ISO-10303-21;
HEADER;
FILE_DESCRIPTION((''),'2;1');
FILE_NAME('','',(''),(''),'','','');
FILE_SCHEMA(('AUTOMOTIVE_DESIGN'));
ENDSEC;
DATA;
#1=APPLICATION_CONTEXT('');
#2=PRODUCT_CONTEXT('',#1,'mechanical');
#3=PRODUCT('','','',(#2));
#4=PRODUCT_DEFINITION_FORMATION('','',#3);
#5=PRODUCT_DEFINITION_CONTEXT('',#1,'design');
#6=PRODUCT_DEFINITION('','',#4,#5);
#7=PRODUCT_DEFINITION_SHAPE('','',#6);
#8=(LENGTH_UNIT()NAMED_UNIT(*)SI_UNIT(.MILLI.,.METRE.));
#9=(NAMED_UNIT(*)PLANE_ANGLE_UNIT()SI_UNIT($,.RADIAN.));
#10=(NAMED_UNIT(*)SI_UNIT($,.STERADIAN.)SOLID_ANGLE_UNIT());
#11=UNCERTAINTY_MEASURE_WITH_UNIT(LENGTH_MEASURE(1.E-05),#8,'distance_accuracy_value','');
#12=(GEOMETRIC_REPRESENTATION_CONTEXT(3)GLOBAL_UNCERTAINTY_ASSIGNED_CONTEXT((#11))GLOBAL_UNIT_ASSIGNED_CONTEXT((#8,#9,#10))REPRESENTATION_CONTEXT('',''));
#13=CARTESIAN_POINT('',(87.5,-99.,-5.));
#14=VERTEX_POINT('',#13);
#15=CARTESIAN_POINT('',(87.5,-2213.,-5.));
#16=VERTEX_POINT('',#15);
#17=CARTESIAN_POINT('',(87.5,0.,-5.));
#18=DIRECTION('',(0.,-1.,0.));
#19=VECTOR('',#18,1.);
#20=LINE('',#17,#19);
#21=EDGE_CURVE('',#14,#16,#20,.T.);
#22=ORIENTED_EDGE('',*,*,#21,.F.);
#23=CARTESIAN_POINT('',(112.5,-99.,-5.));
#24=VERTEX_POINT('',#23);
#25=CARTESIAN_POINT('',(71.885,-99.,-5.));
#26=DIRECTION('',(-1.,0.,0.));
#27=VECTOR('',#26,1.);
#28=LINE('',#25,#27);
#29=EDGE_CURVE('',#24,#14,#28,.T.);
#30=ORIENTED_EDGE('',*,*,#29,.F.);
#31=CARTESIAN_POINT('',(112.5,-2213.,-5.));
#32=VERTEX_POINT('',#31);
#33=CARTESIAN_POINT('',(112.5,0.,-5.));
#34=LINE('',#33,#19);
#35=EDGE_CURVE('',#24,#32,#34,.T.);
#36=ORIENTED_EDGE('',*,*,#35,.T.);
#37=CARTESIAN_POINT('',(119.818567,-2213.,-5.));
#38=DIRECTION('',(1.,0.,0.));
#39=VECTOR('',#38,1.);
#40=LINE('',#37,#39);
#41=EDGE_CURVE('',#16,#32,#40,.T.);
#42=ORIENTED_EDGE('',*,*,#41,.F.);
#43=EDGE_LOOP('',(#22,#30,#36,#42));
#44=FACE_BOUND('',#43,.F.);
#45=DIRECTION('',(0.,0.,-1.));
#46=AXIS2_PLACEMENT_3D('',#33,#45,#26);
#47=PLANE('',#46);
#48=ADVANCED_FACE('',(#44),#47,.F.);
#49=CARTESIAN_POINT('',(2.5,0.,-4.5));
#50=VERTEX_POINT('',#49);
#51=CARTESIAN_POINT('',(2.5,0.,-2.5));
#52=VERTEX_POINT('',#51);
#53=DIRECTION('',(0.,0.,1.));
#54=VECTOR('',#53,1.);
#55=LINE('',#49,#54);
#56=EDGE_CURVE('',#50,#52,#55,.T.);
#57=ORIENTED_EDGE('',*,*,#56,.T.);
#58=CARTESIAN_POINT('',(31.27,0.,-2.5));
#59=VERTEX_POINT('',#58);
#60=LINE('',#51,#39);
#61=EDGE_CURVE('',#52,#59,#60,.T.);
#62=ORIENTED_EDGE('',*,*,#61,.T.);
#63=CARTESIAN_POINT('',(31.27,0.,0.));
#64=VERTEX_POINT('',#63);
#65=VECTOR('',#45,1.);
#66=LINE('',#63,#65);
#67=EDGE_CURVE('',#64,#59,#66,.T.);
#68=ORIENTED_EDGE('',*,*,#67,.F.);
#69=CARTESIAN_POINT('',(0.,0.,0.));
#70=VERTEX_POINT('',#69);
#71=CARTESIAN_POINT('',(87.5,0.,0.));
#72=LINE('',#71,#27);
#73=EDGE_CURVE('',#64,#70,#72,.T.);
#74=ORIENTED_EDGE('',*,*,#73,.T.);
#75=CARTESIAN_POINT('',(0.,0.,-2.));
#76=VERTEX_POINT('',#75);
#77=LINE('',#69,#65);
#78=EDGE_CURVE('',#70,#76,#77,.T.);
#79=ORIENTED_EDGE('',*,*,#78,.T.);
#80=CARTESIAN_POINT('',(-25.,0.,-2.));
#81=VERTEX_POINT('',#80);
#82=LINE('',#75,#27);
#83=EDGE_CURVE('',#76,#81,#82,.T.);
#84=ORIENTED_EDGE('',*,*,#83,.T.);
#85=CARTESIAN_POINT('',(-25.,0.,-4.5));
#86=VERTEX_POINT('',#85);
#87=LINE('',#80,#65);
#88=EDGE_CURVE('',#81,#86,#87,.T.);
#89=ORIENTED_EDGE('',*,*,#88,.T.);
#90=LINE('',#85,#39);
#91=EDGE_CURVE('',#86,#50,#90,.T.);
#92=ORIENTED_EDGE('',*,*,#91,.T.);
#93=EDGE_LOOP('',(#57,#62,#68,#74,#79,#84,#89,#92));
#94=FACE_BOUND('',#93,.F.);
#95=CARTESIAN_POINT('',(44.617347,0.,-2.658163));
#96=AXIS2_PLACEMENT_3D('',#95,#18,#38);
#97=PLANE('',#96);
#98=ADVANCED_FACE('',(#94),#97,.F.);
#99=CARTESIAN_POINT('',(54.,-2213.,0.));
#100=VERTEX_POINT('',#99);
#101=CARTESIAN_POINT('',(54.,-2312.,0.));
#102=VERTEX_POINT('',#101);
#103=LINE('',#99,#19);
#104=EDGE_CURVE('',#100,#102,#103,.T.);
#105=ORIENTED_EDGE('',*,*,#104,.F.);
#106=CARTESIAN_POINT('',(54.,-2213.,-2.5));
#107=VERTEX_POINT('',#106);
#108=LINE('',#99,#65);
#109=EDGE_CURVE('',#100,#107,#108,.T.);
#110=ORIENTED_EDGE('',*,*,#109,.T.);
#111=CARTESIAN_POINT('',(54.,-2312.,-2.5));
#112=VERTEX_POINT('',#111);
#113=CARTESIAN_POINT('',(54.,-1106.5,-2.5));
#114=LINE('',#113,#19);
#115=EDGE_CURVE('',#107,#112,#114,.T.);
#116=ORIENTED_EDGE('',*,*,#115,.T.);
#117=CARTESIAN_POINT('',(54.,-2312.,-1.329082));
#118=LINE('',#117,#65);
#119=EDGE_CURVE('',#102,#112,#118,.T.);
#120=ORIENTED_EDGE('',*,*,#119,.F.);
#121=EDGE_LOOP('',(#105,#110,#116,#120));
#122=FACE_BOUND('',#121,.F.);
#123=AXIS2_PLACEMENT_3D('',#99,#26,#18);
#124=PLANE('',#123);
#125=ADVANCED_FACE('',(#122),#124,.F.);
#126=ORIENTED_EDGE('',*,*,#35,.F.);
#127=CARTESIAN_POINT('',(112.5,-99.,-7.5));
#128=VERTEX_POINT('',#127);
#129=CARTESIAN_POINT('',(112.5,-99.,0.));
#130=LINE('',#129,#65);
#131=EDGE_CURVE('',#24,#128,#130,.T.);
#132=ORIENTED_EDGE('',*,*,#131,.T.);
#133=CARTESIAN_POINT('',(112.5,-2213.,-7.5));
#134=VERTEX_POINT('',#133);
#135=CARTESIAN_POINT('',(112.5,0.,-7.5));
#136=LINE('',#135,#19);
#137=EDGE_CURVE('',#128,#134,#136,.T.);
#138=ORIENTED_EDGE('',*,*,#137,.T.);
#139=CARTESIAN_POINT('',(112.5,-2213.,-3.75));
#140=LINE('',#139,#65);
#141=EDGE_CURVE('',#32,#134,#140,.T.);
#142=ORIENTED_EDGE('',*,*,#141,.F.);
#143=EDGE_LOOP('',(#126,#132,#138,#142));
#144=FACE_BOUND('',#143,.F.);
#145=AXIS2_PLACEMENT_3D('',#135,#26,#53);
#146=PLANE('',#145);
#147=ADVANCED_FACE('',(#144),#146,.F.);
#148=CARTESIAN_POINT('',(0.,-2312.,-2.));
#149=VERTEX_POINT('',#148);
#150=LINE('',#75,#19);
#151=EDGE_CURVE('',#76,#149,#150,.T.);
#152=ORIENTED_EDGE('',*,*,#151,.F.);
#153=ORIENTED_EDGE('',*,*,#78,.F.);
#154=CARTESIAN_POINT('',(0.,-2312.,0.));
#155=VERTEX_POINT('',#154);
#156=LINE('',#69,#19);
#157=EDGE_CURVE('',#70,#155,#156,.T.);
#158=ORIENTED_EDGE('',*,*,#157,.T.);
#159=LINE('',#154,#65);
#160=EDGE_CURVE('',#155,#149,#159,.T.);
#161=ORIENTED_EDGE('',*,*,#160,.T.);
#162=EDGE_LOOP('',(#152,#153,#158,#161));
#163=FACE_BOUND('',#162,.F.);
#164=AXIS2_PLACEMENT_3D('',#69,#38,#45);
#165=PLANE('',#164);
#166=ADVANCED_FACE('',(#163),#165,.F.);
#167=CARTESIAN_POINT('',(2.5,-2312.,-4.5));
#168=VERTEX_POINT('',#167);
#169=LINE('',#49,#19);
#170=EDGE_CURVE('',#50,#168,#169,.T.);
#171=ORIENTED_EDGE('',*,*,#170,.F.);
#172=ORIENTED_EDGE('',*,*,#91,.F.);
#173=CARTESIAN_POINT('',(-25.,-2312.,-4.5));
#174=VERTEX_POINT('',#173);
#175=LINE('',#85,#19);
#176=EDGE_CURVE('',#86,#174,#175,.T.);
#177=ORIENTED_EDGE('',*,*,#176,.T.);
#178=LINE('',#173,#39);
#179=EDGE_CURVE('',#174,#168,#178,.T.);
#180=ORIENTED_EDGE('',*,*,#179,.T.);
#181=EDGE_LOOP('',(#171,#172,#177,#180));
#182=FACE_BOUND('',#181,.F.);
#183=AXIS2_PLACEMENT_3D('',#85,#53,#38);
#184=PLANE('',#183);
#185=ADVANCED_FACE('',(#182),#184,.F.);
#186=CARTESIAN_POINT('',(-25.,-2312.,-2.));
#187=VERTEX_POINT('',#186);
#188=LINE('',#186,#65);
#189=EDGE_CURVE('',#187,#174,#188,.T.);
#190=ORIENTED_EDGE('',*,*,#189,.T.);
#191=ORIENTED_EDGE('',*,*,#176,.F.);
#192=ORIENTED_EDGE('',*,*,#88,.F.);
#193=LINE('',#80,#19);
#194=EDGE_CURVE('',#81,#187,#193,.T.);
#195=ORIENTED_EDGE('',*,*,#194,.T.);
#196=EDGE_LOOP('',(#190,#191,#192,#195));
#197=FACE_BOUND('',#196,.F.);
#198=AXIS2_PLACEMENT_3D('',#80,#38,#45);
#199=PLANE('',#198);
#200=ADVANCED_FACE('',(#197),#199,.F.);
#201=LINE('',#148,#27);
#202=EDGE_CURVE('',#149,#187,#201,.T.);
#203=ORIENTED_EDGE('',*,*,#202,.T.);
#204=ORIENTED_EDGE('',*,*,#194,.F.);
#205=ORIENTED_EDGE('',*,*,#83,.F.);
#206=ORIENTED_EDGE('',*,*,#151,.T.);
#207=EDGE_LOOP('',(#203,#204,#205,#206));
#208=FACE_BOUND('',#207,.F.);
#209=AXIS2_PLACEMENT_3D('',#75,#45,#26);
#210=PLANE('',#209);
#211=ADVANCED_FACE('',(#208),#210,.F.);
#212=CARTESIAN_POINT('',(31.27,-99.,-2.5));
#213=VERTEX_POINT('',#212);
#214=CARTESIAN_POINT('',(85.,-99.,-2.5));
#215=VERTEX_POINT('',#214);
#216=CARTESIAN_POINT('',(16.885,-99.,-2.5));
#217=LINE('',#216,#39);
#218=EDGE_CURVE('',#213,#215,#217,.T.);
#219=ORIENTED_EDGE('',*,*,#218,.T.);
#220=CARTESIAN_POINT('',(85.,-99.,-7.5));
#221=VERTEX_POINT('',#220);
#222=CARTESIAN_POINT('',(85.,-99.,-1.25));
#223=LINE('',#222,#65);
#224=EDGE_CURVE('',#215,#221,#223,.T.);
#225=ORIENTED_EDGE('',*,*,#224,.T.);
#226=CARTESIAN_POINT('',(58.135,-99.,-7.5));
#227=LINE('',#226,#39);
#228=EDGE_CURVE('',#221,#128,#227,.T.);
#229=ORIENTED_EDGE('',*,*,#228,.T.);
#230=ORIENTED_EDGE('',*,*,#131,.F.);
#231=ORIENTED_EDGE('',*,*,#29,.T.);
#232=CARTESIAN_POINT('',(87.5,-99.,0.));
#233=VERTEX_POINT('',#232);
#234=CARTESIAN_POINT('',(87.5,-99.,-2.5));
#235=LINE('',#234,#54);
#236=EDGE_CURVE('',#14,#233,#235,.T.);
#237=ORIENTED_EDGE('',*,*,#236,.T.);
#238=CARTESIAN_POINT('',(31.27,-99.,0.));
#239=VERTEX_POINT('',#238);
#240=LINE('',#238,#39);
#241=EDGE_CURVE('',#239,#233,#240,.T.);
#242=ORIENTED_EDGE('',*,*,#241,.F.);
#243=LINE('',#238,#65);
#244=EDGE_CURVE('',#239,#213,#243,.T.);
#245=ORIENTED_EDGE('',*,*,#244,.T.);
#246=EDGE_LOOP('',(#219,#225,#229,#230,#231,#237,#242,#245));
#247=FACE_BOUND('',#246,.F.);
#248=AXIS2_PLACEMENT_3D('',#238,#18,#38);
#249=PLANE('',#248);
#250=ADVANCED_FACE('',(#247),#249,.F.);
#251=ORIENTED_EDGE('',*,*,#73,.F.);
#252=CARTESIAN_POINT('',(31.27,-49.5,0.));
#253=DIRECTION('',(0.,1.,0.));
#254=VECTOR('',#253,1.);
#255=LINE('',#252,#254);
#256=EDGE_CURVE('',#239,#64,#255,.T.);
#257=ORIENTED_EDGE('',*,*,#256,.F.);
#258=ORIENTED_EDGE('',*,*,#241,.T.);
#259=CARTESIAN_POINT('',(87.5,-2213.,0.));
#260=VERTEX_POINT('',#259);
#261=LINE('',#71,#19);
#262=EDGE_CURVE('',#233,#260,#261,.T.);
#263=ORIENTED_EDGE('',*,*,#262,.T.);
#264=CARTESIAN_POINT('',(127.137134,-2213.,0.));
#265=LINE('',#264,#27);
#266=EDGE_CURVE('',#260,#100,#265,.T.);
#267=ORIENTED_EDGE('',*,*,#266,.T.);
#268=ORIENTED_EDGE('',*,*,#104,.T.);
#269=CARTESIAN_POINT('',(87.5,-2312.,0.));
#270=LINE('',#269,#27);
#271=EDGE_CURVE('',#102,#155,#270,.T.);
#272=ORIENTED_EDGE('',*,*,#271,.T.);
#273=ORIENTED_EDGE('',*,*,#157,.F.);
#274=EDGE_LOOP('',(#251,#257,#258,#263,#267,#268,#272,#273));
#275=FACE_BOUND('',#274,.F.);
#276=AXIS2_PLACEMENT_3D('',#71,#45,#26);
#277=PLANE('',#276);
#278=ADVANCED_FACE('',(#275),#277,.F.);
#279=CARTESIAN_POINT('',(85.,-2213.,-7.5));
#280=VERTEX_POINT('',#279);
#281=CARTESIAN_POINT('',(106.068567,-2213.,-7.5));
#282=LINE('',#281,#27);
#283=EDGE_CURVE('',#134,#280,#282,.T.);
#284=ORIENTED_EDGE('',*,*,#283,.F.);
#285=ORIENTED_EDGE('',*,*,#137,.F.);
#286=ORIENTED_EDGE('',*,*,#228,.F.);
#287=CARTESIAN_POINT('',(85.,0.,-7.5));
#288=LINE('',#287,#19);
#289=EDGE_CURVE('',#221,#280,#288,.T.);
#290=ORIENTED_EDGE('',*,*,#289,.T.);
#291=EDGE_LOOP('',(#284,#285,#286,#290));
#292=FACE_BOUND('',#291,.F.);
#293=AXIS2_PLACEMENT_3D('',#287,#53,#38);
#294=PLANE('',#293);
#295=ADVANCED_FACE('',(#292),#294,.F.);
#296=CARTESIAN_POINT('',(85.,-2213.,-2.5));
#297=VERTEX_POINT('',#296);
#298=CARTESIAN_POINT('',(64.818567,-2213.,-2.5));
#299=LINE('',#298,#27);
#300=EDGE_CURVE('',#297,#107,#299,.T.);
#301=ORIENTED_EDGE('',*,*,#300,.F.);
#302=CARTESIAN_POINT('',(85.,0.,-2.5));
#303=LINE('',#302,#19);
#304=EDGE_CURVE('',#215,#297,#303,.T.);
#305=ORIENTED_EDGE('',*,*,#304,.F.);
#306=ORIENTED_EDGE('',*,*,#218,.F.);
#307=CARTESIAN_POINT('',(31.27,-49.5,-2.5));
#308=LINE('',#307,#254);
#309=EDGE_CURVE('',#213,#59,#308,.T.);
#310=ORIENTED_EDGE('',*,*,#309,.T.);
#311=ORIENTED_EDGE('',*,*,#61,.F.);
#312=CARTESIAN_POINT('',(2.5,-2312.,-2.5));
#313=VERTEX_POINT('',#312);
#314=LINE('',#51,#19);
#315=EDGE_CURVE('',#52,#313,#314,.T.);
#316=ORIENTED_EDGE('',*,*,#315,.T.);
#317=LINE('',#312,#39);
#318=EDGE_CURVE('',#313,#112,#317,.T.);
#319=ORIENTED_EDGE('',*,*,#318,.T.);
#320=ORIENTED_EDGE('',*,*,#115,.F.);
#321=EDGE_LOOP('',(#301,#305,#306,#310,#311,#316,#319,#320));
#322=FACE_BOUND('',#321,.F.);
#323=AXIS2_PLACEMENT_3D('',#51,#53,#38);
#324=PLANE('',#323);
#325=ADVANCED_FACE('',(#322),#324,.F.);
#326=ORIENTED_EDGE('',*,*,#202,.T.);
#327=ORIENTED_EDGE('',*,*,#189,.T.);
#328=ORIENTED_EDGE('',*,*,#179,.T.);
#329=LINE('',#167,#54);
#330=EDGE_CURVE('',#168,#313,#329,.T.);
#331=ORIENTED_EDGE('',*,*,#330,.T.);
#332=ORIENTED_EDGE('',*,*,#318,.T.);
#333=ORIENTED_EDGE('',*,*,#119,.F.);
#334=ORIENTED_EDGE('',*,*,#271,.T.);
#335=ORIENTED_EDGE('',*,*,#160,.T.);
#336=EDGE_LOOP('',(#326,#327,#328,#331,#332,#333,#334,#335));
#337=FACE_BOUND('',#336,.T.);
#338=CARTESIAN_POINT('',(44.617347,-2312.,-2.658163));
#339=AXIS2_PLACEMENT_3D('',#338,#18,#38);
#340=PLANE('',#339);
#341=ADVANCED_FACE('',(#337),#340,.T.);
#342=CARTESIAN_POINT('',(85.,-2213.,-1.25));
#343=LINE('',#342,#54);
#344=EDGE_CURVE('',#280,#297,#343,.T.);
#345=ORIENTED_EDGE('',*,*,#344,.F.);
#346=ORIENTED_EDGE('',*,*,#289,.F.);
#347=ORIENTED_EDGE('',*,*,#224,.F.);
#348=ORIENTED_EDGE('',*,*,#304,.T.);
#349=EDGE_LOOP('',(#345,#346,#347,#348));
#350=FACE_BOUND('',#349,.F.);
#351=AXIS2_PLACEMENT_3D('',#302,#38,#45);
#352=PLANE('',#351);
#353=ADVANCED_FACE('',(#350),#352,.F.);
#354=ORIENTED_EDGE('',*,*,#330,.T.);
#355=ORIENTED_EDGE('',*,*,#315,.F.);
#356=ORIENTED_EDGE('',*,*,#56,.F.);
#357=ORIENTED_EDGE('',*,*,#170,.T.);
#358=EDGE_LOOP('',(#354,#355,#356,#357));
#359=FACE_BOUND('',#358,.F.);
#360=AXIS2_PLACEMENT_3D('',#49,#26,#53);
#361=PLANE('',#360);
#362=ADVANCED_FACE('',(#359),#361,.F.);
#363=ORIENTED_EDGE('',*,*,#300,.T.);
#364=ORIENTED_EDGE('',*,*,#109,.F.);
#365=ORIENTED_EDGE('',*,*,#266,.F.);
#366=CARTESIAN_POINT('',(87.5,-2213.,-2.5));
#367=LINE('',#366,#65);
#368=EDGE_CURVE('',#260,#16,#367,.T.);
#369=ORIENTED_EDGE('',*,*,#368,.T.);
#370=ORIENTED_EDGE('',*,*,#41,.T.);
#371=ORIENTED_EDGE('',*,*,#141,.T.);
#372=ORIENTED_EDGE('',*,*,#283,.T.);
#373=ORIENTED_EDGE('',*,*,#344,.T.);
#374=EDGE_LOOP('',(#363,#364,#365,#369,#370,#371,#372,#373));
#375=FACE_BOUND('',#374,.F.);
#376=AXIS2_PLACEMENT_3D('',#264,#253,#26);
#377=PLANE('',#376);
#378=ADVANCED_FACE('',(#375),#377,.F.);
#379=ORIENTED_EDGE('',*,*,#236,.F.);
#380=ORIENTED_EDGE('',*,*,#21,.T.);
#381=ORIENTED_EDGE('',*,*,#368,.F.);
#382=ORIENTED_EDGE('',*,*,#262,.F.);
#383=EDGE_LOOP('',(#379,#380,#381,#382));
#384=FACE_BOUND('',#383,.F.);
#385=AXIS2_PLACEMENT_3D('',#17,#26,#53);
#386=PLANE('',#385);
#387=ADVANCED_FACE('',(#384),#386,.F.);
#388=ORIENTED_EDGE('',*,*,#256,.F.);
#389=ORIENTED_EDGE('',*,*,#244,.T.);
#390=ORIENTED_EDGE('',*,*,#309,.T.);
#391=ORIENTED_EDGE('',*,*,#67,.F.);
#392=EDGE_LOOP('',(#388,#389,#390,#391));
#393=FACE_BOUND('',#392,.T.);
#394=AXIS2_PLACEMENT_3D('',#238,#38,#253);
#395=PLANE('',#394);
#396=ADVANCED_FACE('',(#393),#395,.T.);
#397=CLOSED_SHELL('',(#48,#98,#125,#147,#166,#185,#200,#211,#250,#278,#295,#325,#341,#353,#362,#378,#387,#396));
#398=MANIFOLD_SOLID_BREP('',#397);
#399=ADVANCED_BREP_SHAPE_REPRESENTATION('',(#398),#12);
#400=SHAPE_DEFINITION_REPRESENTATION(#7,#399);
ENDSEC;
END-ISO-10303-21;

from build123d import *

# Parameters (mm, degrees)
F1_DEPTH = 2312
F2_W     = 56.23
F2_H     = 99
F2_W_2   = 25
F2_W_3   = 33.5
F3_DEPTH = 7.501


# Not quite as in the source:
# - a feature names something its author has since deleted; it is built from what else it names


with BuildPart() as f1:
    # F0 (on Front) → F1 (new body)
    with BuildSketch(Plane.XZ):
        Polygon((87.5, 0), (0, 0), (0, -2), (-25, -2), (-25, -4.5), (2.5, -4.5), (2.5, -2.5), (85, -2.5), (85, -7.5), (112.5, -7.5), (112.5, -5), (87.5, -5), align=None)
    extrude(amount=F1_DEPTH)

    # F2 (on face) → F3 (cut, through all)
    with BuildSketch(Plane.XY):
        with Locations((59.385, -49.5)):
            Rectangle(F2_W, F2_H)
        with Locations((100, -49.5)):
            Rectangle(F2_W_2, F2_H)
        Polygon((127.1371338549, -2213), (87.5, -2213), (87.5, -2312), (54, -2312), (54, -2342.1576023102), (127.1371338549, -2342.1576023102), align=None)
        with Locations((70.75, -2262.5)):
            Rectangle(F2_W_3, F2_H)
    extrude(amount=-F3_DEPTH, mode=Mode.SUBTRACT)


solid = f1.part
